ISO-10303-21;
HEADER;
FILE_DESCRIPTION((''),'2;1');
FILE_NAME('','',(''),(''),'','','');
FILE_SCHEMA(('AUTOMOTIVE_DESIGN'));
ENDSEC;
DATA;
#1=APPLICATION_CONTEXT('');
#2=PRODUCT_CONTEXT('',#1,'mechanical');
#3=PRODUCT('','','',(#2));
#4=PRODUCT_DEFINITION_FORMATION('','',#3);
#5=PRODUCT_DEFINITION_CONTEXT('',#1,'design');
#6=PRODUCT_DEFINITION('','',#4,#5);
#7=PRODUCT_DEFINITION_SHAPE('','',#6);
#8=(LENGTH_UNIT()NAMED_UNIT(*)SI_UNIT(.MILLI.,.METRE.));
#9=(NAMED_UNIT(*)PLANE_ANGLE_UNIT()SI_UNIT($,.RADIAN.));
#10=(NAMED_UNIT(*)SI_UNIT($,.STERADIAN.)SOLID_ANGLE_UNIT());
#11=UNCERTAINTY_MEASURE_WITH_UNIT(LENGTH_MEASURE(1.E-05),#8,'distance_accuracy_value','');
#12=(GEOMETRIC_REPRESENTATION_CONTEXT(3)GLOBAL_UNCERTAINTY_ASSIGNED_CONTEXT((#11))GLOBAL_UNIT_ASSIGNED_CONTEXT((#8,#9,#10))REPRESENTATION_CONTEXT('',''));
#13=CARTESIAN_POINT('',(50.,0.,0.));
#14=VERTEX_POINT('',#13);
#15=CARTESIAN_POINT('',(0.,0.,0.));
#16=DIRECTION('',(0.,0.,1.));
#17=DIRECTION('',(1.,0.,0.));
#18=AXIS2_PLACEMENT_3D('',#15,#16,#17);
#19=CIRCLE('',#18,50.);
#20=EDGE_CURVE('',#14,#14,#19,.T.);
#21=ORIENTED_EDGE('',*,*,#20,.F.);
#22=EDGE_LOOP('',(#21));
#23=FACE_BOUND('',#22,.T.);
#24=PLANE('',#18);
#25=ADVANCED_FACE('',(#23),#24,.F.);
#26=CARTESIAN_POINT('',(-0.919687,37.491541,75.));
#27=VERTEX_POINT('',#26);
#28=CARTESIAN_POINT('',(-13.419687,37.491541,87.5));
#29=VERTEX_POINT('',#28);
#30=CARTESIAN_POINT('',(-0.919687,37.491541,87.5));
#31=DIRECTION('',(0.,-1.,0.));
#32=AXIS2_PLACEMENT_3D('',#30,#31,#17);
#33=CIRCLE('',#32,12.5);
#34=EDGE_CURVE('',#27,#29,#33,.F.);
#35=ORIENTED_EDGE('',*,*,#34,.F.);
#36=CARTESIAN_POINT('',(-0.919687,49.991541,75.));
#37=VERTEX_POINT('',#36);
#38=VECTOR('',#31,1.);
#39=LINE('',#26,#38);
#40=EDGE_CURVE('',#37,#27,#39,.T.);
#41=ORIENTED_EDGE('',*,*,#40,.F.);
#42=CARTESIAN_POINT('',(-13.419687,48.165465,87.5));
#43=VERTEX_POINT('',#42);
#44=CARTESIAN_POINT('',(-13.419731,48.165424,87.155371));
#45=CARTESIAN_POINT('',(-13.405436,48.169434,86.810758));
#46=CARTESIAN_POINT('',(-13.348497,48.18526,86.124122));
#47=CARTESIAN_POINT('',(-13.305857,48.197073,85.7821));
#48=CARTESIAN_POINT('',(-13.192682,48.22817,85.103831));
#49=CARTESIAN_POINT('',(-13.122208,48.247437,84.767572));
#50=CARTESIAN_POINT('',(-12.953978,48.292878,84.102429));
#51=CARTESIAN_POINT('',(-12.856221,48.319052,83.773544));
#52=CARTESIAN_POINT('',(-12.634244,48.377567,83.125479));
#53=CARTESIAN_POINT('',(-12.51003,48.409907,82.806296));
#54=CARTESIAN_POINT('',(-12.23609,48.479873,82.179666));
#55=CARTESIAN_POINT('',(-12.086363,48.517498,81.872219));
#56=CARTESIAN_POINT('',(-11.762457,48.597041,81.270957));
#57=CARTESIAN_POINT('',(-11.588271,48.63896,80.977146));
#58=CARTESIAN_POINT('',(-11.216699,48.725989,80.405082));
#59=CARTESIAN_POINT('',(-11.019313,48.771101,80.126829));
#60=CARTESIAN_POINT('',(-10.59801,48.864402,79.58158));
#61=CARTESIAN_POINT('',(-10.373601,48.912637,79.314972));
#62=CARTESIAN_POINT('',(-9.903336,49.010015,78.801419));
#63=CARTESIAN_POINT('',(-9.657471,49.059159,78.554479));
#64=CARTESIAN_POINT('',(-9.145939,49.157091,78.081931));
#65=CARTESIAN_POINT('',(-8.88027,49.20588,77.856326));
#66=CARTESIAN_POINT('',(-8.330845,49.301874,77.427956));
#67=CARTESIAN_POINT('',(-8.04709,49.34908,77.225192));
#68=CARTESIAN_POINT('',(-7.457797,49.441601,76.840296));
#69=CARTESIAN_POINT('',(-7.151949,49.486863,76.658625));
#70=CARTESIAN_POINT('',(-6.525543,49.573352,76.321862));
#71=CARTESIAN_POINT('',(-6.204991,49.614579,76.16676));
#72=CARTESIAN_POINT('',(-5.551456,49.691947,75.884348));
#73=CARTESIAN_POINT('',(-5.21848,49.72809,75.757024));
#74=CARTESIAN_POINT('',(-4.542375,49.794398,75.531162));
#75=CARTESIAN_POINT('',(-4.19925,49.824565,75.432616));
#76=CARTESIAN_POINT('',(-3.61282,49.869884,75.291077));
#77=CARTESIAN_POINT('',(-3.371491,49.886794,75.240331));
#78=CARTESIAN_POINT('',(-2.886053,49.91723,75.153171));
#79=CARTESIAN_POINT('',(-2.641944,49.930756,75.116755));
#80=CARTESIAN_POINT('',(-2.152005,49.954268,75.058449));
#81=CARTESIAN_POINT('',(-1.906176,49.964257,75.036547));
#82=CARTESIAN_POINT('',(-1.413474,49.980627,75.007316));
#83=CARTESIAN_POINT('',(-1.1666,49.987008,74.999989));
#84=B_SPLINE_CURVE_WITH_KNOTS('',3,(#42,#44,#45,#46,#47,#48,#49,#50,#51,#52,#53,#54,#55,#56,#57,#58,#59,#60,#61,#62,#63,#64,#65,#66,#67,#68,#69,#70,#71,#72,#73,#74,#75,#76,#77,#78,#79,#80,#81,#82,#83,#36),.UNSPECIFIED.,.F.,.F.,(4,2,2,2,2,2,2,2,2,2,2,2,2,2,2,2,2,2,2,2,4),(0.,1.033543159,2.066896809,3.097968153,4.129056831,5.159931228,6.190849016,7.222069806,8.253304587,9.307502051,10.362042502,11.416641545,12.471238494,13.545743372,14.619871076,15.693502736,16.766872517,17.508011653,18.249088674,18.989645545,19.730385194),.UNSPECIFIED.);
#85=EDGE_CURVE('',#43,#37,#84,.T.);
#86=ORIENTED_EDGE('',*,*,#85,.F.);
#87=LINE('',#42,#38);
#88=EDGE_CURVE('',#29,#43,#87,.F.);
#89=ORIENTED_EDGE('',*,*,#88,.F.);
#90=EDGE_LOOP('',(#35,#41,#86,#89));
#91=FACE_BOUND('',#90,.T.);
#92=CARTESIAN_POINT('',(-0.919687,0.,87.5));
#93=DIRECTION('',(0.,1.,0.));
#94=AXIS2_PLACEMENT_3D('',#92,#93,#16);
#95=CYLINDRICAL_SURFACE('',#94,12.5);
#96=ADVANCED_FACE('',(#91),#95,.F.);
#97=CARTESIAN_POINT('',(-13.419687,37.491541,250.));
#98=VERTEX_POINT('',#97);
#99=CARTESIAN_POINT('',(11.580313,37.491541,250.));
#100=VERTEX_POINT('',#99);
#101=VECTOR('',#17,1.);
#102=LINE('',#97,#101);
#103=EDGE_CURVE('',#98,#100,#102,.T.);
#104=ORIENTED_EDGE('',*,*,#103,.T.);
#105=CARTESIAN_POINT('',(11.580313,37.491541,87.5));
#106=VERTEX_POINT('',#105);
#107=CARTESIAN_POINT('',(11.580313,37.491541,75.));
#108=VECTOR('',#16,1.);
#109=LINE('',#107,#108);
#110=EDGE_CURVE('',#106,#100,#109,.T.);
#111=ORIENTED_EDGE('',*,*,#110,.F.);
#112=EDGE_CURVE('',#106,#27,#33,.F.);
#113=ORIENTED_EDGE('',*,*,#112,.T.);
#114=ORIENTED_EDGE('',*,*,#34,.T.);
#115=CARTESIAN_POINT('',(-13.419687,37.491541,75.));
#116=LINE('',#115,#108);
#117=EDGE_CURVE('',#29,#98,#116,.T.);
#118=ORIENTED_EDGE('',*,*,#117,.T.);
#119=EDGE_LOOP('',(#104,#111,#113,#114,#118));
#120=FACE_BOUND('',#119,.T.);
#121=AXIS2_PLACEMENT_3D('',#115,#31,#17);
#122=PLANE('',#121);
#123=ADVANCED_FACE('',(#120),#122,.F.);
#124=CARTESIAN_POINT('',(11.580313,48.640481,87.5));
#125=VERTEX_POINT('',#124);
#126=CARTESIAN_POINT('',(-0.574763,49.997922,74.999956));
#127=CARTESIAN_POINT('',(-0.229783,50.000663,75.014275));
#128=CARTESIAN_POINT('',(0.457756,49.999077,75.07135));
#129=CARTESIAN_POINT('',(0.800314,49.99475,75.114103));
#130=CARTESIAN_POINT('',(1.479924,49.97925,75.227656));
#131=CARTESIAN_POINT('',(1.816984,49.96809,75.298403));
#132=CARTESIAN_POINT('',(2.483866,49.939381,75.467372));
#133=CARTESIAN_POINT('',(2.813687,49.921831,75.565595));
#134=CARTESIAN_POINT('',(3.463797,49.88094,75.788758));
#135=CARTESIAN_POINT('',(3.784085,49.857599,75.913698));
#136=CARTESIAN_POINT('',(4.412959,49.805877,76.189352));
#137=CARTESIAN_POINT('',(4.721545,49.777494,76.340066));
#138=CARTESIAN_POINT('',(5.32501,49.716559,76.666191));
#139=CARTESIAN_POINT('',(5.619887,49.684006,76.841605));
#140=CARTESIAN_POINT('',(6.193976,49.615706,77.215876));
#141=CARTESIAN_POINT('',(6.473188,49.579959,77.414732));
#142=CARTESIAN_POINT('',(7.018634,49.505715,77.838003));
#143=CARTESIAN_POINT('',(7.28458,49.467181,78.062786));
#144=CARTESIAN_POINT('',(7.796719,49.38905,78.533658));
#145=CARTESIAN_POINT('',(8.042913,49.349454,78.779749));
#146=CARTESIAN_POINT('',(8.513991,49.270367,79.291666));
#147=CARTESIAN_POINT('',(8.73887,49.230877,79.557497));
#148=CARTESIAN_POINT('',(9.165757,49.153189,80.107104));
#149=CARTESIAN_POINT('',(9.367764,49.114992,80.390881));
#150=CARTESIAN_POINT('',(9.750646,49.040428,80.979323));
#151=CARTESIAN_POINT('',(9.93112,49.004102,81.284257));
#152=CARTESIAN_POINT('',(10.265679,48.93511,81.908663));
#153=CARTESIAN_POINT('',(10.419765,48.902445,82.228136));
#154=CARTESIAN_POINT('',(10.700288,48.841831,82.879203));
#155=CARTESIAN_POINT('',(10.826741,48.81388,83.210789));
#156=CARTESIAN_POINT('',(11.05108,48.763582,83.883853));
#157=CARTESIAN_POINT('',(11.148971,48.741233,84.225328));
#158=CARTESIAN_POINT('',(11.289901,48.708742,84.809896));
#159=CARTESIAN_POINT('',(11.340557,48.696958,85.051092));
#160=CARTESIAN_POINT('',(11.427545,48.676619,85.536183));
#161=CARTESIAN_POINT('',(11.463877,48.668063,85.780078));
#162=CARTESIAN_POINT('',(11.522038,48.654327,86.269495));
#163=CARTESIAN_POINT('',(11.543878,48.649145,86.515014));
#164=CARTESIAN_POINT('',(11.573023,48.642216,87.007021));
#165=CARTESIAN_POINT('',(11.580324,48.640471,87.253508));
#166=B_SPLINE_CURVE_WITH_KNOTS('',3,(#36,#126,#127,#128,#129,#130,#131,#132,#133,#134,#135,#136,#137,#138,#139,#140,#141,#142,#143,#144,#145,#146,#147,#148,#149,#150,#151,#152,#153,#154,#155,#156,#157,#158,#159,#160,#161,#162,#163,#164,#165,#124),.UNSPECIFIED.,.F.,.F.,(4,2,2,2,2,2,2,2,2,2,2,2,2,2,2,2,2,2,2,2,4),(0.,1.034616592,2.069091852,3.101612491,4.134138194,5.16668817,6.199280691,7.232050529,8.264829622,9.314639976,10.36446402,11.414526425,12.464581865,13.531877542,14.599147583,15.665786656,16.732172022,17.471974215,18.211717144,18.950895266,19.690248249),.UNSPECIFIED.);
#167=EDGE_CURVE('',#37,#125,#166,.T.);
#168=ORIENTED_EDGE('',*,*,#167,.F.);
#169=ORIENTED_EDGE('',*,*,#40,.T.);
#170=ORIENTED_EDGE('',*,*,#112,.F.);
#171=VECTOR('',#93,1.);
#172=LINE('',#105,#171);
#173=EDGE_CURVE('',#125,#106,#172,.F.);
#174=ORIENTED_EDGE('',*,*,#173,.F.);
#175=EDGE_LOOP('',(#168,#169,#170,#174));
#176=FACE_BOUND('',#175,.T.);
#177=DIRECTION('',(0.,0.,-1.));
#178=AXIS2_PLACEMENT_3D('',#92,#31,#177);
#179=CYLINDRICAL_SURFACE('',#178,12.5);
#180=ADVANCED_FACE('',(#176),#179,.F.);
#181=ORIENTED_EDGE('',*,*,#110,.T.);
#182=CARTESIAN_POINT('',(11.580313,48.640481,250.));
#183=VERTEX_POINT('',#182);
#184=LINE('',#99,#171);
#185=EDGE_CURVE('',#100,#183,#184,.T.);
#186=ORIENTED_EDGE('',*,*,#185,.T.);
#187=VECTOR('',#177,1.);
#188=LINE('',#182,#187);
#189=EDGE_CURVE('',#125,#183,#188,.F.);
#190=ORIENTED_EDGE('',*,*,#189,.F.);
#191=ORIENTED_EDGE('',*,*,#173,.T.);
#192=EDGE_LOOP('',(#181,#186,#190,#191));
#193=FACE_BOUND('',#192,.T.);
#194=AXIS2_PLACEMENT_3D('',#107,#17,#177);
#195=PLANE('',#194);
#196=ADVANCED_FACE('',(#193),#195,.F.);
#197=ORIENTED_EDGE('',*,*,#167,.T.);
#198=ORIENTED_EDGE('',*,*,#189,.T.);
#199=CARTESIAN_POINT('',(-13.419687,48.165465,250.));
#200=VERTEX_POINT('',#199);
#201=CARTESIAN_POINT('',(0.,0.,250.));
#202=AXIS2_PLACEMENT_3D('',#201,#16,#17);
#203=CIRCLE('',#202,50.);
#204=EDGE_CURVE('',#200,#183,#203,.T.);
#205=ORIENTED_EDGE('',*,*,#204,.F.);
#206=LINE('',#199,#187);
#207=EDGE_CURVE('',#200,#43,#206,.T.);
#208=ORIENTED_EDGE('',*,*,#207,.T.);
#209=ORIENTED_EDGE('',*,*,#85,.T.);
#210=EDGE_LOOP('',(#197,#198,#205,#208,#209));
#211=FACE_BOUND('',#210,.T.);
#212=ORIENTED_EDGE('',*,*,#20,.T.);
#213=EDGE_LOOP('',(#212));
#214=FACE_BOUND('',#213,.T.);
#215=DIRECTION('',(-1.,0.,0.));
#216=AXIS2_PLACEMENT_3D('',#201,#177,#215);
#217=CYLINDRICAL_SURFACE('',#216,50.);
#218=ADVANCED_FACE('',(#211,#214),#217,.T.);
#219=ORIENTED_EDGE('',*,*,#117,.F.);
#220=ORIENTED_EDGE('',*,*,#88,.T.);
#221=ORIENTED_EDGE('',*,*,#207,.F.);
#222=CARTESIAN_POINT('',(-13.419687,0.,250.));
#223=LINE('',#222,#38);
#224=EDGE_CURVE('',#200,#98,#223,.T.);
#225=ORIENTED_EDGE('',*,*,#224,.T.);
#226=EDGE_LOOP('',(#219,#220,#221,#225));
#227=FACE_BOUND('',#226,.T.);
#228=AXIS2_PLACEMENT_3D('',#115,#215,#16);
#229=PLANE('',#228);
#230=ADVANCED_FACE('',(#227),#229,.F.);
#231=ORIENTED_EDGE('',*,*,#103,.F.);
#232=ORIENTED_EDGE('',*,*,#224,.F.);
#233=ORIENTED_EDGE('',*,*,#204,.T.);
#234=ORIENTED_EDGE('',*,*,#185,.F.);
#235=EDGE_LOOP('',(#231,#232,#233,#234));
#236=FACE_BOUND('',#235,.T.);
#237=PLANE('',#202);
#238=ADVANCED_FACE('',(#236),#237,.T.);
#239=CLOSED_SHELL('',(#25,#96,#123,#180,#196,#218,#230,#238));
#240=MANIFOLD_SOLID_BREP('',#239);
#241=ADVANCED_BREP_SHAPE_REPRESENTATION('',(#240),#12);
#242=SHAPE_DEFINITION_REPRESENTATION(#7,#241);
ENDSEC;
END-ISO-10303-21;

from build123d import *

# Parameters (mm, degrees)
SKETCH1_R           = 50
BOSS_EXTRUDE1_DEPTH = 250
SKETCH2_W           = 25
SKETCH2_H           = 25
CUT_EXTRUDE1_DEPTH  = 175
FILLET1_R           = 12.5
FILLET2_R           = 12.5


with BuildPart() as part:
    # Sketch1 → Boss-Extrude1 (new body)
    with BuildSketch(Plane.XY):
        Circle(SKETCH1_R)
    extrude(amount=BOSS_EXTRUDE1_DEPTH)

    # Sketch2 → Cut-Extrude1 (cut)
    with BuildSketch(Plane.XY.offset(250)):
        with Locations((-0.919686695, 49.991541048)):
            Rectangle(SKETCH2_W, SKETCH2_H)
    extrude(amount=-CUT_EXTRUDE1_DEPTH, mode=Mode.SUBTRACT)

    # Fillet1
    fillet1_edges = [part.edges().sort_by_distance(p)[0] for p in [
        (-13.419686695, 42.828502974, 75),
    ]]
    fillet(fillet1_edges, radius=FILLET1_R)

    # Fillet2
    fillet2_edges = [part.edges().sort_by_distance(p)[0] for p in [
        (11.580313305, 43.066010777, 75),
    ]]
    fillet(fillet2_edges, radius=FILLET2_R - 0.0001)  # a hair under: the kernel refuses the full size


solid = part.part
